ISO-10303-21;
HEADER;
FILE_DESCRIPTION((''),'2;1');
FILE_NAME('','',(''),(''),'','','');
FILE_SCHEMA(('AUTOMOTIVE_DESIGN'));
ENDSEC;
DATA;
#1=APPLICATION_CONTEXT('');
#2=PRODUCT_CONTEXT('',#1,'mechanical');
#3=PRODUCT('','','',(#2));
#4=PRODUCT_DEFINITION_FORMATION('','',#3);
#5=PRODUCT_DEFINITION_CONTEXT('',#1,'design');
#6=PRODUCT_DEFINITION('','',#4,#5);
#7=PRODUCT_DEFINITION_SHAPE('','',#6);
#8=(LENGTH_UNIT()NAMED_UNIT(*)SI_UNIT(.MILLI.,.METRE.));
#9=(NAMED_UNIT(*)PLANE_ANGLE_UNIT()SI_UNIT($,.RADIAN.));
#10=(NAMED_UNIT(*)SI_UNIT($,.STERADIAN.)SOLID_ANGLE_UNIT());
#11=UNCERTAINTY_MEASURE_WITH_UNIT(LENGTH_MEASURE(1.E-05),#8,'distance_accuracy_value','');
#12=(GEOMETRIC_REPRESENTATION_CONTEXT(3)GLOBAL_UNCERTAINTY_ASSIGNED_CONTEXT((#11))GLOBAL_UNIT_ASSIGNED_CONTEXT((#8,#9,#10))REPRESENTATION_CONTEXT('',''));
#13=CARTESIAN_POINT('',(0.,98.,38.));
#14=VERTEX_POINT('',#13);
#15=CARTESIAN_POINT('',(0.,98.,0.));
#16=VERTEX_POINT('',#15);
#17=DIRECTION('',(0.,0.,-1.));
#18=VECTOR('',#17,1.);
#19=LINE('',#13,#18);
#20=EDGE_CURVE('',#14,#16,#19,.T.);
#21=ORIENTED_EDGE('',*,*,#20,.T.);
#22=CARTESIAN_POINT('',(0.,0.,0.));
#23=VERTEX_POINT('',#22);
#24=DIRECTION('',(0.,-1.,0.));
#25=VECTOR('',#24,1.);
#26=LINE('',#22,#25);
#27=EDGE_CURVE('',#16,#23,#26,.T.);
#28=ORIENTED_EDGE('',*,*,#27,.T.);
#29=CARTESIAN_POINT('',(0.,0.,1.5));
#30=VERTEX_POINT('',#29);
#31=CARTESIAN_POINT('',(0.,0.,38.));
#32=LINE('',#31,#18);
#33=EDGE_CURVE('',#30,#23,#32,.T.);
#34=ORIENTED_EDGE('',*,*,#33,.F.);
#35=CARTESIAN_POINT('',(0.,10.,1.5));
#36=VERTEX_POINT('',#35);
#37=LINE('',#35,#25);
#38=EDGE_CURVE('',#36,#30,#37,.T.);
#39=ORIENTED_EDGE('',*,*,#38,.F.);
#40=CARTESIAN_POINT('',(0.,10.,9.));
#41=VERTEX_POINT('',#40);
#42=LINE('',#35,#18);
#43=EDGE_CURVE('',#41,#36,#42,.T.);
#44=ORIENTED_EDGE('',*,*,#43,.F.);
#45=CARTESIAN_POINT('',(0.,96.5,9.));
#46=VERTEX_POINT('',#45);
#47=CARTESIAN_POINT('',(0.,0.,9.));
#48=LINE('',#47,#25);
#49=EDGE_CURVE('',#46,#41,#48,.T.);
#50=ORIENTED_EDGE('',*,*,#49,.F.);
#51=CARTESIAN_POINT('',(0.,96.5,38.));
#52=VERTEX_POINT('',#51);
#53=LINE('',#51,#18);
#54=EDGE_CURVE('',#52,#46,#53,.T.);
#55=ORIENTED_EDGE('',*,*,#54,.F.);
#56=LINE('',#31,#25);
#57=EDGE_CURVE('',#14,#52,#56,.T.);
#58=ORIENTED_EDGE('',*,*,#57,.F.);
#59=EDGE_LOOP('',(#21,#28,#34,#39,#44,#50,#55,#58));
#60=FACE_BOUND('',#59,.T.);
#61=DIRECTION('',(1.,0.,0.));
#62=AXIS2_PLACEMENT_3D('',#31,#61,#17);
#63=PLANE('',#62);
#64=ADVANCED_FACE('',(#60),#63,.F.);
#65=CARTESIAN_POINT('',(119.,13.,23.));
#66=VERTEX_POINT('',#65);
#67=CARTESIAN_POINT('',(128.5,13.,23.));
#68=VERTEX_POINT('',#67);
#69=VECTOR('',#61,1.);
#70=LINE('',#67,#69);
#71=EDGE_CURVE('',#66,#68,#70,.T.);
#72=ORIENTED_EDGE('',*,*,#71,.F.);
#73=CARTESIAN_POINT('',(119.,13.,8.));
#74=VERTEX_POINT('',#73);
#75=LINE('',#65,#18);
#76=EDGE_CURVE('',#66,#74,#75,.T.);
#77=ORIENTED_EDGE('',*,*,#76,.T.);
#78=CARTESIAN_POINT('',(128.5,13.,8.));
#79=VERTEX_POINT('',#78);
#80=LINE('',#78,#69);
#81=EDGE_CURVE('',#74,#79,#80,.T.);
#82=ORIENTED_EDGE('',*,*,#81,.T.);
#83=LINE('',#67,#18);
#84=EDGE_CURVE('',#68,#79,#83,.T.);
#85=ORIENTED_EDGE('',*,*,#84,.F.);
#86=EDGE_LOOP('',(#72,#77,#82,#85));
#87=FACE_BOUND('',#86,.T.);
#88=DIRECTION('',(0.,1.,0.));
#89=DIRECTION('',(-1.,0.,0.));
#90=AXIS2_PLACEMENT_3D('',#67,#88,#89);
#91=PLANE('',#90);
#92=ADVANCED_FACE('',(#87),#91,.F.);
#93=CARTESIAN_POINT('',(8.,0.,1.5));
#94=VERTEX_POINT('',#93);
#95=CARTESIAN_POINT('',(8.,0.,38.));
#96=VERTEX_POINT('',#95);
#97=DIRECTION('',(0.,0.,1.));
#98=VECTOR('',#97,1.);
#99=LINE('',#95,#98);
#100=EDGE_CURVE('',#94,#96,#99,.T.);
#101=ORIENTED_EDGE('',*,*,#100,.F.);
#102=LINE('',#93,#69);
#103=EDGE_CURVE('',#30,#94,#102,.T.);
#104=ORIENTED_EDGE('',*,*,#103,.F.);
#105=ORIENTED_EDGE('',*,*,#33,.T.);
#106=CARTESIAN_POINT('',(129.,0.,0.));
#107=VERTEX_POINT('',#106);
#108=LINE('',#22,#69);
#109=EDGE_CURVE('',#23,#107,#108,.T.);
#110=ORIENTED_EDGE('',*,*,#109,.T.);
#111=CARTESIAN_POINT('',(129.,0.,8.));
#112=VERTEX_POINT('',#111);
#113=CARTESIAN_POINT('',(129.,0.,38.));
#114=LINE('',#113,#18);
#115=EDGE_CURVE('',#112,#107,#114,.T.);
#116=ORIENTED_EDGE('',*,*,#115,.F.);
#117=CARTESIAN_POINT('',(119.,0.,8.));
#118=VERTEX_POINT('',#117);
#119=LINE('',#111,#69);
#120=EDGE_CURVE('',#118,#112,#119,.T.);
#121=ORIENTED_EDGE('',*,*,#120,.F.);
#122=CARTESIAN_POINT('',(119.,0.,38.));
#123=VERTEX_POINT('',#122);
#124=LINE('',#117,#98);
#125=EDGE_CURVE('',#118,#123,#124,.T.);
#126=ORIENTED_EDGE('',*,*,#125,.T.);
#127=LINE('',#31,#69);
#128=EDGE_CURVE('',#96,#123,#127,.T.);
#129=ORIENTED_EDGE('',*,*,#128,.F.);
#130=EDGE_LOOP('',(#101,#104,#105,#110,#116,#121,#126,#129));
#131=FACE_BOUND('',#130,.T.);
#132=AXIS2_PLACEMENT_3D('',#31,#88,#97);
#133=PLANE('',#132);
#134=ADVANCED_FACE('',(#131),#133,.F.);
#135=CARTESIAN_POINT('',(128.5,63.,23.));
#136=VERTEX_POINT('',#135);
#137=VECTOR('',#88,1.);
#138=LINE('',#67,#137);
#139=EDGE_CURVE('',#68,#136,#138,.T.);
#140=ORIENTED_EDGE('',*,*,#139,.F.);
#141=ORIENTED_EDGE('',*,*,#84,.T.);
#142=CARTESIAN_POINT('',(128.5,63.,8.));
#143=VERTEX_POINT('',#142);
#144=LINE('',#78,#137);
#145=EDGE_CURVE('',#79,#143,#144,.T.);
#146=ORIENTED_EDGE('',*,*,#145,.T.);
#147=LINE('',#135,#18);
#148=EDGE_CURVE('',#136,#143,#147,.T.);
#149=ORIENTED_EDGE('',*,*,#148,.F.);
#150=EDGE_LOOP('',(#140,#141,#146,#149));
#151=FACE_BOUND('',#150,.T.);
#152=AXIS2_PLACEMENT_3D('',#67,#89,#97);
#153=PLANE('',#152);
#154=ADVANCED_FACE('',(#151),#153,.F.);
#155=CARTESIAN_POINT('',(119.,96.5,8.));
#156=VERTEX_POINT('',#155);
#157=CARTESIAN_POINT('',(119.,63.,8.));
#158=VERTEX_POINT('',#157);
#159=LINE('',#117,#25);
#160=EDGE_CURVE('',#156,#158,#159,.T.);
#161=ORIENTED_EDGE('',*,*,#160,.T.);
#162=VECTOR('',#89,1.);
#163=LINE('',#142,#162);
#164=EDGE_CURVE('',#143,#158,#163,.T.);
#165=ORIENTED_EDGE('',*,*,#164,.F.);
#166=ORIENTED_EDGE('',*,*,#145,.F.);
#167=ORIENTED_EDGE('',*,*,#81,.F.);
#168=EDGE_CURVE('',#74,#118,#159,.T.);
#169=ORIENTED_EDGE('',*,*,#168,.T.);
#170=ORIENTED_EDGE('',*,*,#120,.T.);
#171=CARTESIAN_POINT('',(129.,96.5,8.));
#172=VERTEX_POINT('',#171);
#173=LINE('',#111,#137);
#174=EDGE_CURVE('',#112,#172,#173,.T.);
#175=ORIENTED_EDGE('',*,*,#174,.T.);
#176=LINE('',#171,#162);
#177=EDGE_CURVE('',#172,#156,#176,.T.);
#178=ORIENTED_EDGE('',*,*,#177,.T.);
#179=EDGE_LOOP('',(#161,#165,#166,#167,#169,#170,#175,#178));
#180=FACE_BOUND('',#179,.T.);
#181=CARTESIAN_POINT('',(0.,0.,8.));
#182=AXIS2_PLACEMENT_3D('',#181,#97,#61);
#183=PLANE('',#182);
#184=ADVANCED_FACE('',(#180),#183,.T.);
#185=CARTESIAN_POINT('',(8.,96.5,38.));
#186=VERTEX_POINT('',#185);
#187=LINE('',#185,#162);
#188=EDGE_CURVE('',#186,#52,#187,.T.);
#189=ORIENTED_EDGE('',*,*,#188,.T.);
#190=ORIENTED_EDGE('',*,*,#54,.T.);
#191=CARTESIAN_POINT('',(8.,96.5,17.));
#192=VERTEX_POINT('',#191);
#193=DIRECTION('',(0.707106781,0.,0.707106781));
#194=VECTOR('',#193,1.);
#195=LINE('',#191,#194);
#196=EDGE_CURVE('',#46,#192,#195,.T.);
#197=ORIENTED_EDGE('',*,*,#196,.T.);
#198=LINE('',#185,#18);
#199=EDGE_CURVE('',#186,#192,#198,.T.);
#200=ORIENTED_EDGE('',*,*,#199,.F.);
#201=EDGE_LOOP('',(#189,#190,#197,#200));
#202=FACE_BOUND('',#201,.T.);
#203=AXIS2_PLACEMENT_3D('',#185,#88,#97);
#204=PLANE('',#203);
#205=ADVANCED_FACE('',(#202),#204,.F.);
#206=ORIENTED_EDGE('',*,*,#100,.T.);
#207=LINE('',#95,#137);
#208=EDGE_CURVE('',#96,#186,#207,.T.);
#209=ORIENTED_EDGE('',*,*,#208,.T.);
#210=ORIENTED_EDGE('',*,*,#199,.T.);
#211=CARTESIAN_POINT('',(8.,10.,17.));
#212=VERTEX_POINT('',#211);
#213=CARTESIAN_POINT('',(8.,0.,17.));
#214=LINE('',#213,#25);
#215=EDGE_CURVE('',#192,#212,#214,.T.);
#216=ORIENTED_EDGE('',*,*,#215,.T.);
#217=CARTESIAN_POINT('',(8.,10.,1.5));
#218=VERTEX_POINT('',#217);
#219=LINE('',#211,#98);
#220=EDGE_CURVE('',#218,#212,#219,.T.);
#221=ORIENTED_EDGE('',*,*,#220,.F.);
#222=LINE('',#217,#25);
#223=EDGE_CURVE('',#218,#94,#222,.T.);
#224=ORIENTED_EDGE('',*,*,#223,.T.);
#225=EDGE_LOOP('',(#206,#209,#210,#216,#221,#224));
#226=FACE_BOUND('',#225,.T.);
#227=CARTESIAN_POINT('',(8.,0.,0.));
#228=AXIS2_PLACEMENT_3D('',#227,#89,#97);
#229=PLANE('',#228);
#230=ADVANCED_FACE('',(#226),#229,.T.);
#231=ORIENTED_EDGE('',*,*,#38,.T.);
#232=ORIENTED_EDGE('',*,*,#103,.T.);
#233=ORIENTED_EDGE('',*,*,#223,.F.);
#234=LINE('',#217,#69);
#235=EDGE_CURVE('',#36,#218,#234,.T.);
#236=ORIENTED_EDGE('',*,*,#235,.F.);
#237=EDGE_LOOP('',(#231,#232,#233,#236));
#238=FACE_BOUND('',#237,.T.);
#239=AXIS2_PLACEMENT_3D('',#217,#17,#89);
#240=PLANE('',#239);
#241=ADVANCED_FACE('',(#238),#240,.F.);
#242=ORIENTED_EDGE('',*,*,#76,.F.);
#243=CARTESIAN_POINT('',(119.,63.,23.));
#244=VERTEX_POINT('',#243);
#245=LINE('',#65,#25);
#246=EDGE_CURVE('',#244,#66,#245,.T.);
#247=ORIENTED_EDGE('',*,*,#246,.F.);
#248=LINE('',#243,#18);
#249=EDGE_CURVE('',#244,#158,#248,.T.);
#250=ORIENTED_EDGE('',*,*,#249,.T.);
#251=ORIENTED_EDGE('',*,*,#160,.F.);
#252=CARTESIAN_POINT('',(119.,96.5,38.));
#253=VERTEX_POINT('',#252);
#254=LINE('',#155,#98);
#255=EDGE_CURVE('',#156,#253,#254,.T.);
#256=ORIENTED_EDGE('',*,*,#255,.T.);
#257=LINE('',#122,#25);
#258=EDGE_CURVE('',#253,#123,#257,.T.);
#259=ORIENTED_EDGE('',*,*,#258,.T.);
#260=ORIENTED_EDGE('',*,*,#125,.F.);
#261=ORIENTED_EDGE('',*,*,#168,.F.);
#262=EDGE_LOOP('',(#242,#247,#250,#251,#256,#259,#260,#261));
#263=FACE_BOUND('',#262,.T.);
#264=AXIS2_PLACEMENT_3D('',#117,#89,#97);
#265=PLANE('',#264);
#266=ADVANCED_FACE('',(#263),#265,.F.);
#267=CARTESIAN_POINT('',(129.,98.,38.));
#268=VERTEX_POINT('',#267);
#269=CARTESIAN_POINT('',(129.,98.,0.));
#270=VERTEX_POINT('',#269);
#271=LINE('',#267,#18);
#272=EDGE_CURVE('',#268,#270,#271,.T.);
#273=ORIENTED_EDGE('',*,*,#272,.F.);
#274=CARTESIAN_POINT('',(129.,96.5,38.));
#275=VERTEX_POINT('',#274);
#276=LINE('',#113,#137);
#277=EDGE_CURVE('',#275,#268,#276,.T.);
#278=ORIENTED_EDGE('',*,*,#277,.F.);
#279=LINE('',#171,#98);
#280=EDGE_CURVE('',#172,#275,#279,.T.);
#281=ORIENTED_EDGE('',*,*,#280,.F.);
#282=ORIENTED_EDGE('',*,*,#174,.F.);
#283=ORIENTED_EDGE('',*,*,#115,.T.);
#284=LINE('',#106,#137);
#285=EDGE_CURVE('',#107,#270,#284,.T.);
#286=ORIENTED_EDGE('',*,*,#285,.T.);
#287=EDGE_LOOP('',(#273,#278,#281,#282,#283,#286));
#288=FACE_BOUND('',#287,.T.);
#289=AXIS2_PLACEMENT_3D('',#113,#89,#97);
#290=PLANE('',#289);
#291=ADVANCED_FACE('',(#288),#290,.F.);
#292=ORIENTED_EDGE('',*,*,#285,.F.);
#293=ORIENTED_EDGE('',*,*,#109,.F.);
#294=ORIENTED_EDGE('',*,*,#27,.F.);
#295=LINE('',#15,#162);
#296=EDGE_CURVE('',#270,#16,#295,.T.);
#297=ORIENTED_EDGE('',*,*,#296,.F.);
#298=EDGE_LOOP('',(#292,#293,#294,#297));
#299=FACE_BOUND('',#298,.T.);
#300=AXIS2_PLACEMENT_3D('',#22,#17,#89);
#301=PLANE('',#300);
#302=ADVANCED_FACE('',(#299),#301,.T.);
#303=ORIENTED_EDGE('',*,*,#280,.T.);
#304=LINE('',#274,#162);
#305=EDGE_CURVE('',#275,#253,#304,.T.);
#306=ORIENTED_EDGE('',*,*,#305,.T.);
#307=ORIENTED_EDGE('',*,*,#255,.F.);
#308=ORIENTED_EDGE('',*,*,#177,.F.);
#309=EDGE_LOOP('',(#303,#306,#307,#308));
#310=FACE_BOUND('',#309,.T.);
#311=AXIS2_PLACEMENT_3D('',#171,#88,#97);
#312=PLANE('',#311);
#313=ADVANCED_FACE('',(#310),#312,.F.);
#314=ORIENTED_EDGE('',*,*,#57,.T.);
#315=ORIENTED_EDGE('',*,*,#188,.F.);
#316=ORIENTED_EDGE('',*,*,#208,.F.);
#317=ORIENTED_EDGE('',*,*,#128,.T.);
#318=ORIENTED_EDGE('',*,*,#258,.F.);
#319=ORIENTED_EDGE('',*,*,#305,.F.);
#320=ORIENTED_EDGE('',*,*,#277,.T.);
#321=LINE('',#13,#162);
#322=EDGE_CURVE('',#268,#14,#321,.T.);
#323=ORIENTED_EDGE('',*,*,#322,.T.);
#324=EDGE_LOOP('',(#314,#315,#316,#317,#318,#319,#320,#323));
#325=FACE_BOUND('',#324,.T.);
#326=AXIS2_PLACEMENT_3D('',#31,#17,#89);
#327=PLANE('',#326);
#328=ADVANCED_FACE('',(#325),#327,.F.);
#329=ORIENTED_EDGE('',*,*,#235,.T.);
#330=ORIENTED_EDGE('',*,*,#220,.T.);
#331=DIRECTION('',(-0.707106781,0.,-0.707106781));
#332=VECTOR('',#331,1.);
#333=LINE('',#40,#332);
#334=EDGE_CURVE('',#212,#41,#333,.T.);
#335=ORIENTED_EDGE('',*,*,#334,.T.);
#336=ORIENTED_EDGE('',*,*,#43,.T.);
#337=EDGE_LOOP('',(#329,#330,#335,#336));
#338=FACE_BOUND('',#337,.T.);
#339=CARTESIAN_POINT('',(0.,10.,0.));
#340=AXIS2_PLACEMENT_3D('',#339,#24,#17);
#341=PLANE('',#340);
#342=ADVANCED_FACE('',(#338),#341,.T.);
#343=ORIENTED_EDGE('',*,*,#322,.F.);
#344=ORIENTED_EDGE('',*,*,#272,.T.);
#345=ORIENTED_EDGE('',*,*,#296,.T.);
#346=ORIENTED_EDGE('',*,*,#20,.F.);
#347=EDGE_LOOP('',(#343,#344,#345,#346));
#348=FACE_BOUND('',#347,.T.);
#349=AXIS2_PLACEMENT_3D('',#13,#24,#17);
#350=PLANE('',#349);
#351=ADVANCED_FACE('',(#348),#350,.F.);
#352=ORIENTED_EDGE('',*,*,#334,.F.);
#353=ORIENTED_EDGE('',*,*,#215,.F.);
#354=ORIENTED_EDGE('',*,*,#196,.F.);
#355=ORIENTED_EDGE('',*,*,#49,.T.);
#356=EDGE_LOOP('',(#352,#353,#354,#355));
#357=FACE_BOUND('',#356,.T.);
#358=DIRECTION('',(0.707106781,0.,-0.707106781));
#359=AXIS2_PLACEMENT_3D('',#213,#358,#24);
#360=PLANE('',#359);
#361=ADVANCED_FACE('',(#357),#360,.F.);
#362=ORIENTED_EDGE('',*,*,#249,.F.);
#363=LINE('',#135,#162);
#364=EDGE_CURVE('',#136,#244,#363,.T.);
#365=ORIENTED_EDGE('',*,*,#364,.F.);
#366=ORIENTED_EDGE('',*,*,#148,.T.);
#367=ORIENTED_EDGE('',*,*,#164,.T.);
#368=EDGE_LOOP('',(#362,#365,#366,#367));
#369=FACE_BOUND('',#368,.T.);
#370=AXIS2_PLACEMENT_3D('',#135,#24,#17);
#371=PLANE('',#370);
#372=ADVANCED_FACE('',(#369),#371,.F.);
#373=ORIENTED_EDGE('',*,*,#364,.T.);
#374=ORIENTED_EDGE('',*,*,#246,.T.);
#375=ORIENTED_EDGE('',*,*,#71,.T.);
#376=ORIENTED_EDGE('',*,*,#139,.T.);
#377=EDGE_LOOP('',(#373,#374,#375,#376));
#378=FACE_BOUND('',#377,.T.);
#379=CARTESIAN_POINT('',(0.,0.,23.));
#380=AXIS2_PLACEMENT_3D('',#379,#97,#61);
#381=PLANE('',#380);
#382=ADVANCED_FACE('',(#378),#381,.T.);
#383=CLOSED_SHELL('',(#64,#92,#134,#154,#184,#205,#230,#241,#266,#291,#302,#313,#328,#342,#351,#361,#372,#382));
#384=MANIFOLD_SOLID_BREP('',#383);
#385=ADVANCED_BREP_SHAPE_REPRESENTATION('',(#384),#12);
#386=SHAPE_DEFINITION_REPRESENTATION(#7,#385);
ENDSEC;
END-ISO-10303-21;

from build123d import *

# Parameters (mm, degrees)
SKETCH_1_W          = 129
SKETCH_1_H          = 98
EXTRUDE_1_DEPTH     = 38
SKETCH_2_W          = 10
SKETCH_2_H          = 96.5
CUT_EXTRUDE_1_DEPTH = 30
SKETCH_3_W          = 9.5
SKETCH_3_H          = 50
EXTRUDE_2_DEPTH     = 15
SKETCH_4_W          = 29
SKETCH_4_H          = 96.5
CUT_EXTRUDE_2_DEPTH = 8
CHAMFER_1_SIZE      = 8
CUT_EXTRUDE_3_DEPTH = 10


with BuildPart() as part:
    # 草图1 → 凸台-拉伸1 (new body)
    with BuildSketch(Plane.XY):
        with Locations((64.5, 49)):
            Rectangle(SKETCH_1_W, SKETCH_1_H)
    extrude(amount=EXTRUDE_1_DEPTH)

    # 草图2 → 切除-拉伸1 (cut)
    with BuildSketch(Plane.XY.offset(38)):
        with Locations((124, 48.25)):
            Rectangle(SKETCH_2_W, SKETCH_2_H)
    extrude(amount=-CUT_EXTRUDE_1_DEPTH, mode=Mode.SUBTRACT)

    # 草图3 → 凸台-拉伸2 (add)
    with BuildSketch(Plane.XY.offset(8)):
        with Locations((123.75, 38)):
            Rectangle(SKETCH_3_W, SKETCH_3_H)
    extrude(amount=EXTRUDE_2_DEPTH)

    # 草图4 → 切除-拉伸2 (cut)
    with BuildSketch(Plane.ZY):
        with Locations((23.5, 48.25)):
            Rectangle(SKETCH_4_W, SKETCH_4_H)
    extrude(amount=-CUT_EXTRUDE_2_DEPTH, mode=Mode.SUBTRACT)

    # 倒角1
    chamfer_1_edges = [part.edges().sort_by_distance(p)[0] for p in [
        (8, 48.25, 9),
    ]]
    chamfer(chamfer_1_edges, length=CHAMFER_1_SIZE - 0.0001)  # a hair under: the kernel refuses the full size

    # 草图5 → 切除-拉伸3 (cut)
    with BuildSketch(Plane.XZ):
        Polygon((0, 9), (8, 17), (8, 1.5), (0, 1.5), align=None)
    extrude(amount=-CUT_EXTRUDE_3_DEPTH, mode=Mode.SUBTRACT)


solid = part.part
